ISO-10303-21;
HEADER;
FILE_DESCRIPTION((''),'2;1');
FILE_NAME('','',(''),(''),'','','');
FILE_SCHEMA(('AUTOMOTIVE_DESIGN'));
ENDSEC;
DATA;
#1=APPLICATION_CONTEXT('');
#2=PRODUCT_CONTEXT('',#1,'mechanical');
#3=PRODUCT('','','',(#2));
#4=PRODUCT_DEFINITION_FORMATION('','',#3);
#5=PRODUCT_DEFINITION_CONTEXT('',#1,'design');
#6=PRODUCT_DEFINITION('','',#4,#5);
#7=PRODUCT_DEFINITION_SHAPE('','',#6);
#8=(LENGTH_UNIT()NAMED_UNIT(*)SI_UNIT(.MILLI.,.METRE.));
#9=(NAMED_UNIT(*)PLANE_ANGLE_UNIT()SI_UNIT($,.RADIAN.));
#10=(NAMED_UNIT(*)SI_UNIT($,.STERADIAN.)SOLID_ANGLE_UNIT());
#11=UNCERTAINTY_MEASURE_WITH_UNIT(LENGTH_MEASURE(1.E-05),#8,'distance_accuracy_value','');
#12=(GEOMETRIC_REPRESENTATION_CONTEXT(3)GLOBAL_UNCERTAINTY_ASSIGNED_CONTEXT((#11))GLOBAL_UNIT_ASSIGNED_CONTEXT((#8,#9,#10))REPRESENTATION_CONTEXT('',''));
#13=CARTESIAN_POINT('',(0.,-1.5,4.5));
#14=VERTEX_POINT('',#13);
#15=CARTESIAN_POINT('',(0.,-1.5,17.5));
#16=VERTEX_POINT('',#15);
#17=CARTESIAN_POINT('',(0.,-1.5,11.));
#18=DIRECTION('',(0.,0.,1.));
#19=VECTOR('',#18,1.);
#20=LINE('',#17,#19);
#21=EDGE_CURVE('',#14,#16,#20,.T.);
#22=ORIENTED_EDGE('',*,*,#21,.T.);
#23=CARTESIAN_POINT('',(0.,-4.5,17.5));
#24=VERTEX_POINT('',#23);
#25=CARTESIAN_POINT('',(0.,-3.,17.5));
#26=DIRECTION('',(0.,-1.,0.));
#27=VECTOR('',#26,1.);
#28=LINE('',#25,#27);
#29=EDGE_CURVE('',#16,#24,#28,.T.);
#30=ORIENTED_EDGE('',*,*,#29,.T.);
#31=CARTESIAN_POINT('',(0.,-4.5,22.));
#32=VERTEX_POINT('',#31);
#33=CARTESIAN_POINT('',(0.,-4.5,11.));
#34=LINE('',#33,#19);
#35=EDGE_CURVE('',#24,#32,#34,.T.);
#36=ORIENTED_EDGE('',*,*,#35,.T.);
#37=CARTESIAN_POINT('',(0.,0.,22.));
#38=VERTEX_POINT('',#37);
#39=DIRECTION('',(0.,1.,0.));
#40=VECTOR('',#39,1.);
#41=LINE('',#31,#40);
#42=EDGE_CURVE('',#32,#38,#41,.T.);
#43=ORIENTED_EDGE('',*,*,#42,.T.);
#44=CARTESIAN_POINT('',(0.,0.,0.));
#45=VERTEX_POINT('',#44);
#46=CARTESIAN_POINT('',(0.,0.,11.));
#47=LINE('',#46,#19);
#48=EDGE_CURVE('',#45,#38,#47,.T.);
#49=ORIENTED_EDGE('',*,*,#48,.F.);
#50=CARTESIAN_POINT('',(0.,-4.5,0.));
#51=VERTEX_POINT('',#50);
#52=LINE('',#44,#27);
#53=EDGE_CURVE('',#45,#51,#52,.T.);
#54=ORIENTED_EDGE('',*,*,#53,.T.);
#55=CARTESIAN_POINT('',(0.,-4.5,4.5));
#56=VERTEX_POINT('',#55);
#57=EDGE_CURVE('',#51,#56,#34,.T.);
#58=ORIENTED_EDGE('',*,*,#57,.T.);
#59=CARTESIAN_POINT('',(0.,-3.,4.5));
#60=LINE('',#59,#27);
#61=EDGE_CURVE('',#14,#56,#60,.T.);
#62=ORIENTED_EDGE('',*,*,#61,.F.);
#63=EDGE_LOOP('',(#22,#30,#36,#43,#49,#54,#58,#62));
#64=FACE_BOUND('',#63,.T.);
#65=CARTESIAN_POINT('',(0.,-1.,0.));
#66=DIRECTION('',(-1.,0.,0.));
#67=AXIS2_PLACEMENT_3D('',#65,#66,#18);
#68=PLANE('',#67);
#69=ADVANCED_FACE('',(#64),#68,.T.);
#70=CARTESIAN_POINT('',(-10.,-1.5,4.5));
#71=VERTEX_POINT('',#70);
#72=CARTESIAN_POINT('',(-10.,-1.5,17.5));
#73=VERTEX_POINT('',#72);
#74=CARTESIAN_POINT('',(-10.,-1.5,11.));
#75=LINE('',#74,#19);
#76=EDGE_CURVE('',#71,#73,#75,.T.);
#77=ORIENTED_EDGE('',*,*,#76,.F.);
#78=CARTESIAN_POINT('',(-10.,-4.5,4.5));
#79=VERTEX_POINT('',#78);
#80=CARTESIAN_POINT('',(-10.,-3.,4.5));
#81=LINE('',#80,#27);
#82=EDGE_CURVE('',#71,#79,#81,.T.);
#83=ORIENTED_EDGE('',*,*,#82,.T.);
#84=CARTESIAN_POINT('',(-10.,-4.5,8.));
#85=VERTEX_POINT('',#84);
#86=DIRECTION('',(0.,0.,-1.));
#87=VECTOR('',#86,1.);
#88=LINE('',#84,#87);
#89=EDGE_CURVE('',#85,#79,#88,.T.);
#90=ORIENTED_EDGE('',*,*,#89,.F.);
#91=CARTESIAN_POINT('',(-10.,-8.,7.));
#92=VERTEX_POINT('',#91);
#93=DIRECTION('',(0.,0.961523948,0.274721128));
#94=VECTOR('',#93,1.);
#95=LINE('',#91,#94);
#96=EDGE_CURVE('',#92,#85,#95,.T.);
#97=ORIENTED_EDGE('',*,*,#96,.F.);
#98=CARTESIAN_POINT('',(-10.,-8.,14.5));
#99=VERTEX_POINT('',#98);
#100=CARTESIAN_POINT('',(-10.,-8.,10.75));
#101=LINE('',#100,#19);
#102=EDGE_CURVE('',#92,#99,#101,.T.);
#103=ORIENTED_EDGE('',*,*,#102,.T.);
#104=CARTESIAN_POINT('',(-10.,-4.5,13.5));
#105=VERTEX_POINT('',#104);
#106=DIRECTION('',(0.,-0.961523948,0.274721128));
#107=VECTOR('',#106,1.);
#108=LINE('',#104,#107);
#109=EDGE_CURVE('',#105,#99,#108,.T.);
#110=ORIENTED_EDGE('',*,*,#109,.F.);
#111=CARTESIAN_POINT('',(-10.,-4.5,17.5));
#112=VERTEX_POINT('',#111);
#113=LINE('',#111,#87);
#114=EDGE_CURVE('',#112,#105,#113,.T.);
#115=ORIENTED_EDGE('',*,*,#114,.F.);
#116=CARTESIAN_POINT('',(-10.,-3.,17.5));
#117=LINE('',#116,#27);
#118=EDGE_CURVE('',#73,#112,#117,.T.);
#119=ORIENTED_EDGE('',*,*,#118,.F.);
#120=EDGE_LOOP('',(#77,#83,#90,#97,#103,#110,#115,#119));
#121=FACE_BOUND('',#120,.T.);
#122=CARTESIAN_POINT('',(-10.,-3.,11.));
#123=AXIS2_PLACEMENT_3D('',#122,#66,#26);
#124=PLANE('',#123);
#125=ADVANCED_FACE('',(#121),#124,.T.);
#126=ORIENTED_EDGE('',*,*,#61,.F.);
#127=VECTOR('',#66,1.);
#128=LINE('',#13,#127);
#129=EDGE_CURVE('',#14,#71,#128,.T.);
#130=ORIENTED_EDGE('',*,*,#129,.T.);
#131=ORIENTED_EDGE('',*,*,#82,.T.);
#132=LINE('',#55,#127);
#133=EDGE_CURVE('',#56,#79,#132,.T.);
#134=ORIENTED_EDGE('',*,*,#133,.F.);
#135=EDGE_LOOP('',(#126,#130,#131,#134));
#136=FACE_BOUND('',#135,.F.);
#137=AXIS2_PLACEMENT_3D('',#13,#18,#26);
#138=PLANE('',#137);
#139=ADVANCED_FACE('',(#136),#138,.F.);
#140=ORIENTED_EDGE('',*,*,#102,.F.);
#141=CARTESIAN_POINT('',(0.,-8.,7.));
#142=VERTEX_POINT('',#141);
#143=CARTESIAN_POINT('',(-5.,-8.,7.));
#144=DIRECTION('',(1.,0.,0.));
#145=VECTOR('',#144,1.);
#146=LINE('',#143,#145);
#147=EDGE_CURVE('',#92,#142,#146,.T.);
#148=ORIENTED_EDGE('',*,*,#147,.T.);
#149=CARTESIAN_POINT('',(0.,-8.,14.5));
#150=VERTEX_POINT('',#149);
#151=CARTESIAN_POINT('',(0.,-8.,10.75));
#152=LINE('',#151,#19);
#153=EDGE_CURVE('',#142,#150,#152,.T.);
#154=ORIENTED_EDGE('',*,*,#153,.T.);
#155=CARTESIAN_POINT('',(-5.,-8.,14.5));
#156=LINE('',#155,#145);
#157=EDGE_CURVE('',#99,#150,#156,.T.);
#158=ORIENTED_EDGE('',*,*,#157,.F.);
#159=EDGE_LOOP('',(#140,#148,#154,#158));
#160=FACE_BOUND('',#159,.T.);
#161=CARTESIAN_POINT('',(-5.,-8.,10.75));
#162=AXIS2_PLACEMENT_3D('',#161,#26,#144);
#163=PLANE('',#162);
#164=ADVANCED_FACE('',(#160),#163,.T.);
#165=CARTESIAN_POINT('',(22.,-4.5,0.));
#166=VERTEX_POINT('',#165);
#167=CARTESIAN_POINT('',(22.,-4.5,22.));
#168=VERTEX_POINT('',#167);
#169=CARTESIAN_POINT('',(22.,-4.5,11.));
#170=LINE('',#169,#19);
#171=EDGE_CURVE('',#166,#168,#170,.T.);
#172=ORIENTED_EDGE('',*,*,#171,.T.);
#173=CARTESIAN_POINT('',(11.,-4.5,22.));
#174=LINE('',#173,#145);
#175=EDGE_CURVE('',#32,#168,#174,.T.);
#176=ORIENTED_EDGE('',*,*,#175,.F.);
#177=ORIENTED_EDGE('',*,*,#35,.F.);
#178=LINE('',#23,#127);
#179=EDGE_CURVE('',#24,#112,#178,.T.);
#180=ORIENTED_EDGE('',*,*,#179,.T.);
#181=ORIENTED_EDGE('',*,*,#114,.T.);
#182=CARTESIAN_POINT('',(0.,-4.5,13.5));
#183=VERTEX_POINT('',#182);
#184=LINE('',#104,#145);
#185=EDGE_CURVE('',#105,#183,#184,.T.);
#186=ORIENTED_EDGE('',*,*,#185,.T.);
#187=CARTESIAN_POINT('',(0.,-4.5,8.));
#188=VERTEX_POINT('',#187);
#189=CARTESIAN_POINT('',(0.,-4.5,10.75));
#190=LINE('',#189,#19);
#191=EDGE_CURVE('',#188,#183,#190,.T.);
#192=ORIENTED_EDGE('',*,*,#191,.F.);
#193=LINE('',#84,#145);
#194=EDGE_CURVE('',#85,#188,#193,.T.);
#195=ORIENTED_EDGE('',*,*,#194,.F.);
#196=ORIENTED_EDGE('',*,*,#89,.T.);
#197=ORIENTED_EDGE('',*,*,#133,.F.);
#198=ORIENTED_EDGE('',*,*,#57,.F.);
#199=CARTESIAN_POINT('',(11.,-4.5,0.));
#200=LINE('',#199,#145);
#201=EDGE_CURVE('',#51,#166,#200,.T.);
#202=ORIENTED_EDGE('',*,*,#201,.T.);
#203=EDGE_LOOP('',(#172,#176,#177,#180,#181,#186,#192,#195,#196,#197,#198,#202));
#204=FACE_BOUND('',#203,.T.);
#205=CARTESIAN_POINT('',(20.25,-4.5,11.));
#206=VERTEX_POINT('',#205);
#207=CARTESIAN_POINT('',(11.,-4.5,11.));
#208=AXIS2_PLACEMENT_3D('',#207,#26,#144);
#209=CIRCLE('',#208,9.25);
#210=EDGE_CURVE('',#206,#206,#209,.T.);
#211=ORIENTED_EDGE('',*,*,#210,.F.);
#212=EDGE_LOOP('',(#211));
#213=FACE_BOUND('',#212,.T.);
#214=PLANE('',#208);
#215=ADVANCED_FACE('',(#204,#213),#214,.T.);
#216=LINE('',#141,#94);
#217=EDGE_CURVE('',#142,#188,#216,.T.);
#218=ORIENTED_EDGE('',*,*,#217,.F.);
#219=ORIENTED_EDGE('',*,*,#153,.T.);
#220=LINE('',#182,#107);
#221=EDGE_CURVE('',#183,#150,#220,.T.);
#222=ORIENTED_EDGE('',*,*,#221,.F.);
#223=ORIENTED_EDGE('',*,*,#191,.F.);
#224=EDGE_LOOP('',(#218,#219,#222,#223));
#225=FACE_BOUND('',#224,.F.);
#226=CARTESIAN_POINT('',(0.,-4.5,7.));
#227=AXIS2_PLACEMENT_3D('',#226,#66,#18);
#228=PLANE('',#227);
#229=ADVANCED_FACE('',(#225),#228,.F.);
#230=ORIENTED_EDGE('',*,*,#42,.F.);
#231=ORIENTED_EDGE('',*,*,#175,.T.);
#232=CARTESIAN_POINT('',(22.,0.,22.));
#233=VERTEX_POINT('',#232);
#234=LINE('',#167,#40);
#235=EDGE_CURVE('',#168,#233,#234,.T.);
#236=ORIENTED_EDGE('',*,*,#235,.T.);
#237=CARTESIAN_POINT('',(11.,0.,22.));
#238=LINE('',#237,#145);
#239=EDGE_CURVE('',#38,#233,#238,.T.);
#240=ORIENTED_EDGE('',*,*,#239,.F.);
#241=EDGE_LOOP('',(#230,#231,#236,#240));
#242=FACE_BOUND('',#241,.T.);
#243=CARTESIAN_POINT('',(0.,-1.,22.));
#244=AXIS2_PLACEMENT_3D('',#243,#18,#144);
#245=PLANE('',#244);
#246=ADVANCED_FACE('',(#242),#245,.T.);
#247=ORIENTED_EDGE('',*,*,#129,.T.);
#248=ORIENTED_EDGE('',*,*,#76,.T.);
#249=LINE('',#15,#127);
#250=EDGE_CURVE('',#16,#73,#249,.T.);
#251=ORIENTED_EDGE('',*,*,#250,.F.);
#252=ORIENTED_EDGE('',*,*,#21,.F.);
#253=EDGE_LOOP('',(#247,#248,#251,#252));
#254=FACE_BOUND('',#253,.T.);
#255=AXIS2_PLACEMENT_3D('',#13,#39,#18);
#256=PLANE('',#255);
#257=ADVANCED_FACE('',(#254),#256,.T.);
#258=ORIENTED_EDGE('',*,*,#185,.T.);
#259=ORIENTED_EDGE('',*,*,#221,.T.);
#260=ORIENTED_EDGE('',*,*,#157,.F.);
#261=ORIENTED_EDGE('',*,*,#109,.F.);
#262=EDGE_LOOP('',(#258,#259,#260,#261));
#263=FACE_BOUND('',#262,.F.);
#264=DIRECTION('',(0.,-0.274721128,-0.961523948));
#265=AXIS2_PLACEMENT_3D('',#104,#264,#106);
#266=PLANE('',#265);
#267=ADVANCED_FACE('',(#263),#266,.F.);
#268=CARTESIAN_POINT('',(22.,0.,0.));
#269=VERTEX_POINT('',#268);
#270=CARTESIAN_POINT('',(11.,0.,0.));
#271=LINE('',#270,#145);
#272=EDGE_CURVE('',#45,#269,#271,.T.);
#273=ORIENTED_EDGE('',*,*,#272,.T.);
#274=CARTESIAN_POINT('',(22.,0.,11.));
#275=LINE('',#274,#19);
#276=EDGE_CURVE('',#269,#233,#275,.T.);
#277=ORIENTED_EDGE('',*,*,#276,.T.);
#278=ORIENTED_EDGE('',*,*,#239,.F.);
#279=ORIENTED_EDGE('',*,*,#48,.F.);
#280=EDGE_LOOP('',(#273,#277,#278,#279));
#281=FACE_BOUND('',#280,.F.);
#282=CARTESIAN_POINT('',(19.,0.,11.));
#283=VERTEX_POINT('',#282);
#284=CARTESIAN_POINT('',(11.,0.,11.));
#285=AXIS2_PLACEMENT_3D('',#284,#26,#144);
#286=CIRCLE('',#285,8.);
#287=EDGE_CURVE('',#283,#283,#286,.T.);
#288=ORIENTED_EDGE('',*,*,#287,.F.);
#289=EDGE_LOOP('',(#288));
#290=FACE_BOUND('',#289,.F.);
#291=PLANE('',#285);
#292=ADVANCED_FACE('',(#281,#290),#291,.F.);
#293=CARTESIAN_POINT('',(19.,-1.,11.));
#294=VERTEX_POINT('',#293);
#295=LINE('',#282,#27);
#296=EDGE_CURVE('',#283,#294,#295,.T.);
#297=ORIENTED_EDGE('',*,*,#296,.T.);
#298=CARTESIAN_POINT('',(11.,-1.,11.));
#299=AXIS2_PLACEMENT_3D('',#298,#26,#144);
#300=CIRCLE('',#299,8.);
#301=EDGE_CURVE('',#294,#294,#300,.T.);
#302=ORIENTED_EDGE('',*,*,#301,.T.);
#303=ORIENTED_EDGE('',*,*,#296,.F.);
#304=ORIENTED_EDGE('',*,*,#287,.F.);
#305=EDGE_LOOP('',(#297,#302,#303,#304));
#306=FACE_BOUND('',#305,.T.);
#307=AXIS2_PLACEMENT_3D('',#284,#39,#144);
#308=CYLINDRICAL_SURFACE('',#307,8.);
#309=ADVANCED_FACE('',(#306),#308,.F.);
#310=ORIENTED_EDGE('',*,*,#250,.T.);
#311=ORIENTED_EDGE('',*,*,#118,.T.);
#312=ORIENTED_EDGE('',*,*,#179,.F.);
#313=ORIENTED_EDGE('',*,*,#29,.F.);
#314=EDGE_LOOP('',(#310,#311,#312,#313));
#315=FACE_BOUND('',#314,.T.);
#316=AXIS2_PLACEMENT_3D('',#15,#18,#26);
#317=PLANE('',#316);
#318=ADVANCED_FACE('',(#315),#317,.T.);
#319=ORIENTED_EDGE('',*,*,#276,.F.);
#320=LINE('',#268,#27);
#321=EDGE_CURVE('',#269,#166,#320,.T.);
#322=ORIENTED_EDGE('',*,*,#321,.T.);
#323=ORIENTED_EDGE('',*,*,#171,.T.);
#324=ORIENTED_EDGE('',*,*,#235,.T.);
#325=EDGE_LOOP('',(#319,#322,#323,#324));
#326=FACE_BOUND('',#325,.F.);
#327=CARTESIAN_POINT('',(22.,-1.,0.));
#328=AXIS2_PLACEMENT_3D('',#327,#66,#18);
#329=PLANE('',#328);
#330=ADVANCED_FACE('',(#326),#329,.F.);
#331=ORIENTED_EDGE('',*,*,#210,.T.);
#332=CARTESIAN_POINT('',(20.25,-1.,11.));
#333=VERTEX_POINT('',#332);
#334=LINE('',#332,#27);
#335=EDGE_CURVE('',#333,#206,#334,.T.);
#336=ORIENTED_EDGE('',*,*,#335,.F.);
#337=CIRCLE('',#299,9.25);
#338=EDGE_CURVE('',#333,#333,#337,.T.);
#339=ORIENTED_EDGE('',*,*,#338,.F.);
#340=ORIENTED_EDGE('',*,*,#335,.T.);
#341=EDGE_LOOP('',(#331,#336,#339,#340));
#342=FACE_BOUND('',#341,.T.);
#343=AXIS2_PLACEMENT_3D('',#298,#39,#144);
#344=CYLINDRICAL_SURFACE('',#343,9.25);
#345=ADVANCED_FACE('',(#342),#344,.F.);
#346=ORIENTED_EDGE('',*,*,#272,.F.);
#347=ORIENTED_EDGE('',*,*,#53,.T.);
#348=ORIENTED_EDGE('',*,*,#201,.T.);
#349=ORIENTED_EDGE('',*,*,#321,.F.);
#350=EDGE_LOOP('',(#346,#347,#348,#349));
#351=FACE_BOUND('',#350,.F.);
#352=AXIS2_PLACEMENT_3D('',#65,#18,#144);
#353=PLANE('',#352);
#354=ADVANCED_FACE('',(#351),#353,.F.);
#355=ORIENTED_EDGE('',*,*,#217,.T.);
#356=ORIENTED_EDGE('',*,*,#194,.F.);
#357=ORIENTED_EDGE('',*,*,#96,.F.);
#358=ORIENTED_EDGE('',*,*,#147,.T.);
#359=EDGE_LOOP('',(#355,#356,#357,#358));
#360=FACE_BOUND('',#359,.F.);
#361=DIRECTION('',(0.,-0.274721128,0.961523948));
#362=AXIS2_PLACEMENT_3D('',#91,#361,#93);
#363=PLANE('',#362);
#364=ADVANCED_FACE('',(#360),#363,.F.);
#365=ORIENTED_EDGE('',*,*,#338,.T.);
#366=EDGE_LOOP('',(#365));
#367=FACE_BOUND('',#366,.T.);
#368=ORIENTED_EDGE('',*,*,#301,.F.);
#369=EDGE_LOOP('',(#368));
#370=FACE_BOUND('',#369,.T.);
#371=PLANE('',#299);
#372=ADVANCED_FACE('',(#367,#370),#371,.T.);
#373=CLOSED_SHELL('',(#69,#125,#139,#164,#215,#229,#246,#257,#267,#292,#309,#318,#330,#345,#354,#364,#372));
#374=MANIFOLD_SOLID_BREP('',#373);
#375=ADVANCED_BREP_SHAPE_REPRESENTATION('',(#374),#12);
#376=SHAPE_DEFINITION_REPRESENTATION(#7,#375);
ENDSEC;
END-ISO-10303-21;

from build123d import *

# Parameters (mm, degrees)
F0_W      = 22
F0_H      = 22
F0_R      = 8
F1_DEPTH  = 1
F2_W      = 22
F2_H      = 22
F2_R      = 9.25
F3_DEPTH  = 3.5
F4_W      = 3
F4_H      = 13
F5_DEPTH  = 10
F6_W      = 10
F6_H      = 7.5
F7_DEPTH  = 3.5
F9_DEPTH  = 10
F10_DEPTH = 10


with BuildPart() as f1:
    # F0 (on Front) → F1 (new body)
    with BuildSketch(Plane.XZ):
        with Locations((11, 11)):
            Rectangle(F0_W, F0_H)
        with Locations((11, 11)):
            Circle(F0_R, mode=Mode.SUBTRACT)
    extrude(amount=F1_DEPTH)

    # F2 (on face) → F3 (join)
    with BuildSketch(Plane.XZ.offset(1)):
        with Locations((11, 11)):
            Rectangle(F2_W, F2_H)
        with Locations((11, 11)):
            Circle(F2_R, mode=Mode.SUBTRACT)
    extrude(amount=F3_DEPTH)

    # F4 (on face) → F5 (join)
    with BuildSketch(Plane(origin=(0, 0, 0), x_dir=(0, -1, 0), z_dir=(-1, 0, 0))):
        with Locations((3, 11)):
            Rectangle(F4_W, F4_H)
    extrude(amount=F5_DEPTH)

    # F6 (on face) → F7 (join)
    with BuildSketch(Plane.XZ.offset(4.5)):
        with Locations((-5, 10.75)):
            Rectangle(F6_W, F6_H)
    extrude(amount=F7_DEPTH)

    # F8 (on face) → F9 (cut)
    with BuildSketch(Plane(origin=(-10, 0, 0), x_dir=(0, -1, 0), z_dir=(-1, 0, 0))):
        Polygon((4.5, 7), (8, 7), (4.5, 8), align=None)
    extrude(amount=-F9_DEPTH, mode=Mode.SUBTRACT)

    # F8 (on face) → F10 (cut)
    with BuildSketch(Plane(origin=(-10, 0, 0), x_dir=(0, -1, 0), z_dir=(-1, 0, 0))):
        Polygon((4.5, 13.5), (8, 14.5), (4.5, 14.5), align=None)
    extrude(amount=-F10_DEPTH, mode=Mode.SUBTRACT)


solid = f1.part
